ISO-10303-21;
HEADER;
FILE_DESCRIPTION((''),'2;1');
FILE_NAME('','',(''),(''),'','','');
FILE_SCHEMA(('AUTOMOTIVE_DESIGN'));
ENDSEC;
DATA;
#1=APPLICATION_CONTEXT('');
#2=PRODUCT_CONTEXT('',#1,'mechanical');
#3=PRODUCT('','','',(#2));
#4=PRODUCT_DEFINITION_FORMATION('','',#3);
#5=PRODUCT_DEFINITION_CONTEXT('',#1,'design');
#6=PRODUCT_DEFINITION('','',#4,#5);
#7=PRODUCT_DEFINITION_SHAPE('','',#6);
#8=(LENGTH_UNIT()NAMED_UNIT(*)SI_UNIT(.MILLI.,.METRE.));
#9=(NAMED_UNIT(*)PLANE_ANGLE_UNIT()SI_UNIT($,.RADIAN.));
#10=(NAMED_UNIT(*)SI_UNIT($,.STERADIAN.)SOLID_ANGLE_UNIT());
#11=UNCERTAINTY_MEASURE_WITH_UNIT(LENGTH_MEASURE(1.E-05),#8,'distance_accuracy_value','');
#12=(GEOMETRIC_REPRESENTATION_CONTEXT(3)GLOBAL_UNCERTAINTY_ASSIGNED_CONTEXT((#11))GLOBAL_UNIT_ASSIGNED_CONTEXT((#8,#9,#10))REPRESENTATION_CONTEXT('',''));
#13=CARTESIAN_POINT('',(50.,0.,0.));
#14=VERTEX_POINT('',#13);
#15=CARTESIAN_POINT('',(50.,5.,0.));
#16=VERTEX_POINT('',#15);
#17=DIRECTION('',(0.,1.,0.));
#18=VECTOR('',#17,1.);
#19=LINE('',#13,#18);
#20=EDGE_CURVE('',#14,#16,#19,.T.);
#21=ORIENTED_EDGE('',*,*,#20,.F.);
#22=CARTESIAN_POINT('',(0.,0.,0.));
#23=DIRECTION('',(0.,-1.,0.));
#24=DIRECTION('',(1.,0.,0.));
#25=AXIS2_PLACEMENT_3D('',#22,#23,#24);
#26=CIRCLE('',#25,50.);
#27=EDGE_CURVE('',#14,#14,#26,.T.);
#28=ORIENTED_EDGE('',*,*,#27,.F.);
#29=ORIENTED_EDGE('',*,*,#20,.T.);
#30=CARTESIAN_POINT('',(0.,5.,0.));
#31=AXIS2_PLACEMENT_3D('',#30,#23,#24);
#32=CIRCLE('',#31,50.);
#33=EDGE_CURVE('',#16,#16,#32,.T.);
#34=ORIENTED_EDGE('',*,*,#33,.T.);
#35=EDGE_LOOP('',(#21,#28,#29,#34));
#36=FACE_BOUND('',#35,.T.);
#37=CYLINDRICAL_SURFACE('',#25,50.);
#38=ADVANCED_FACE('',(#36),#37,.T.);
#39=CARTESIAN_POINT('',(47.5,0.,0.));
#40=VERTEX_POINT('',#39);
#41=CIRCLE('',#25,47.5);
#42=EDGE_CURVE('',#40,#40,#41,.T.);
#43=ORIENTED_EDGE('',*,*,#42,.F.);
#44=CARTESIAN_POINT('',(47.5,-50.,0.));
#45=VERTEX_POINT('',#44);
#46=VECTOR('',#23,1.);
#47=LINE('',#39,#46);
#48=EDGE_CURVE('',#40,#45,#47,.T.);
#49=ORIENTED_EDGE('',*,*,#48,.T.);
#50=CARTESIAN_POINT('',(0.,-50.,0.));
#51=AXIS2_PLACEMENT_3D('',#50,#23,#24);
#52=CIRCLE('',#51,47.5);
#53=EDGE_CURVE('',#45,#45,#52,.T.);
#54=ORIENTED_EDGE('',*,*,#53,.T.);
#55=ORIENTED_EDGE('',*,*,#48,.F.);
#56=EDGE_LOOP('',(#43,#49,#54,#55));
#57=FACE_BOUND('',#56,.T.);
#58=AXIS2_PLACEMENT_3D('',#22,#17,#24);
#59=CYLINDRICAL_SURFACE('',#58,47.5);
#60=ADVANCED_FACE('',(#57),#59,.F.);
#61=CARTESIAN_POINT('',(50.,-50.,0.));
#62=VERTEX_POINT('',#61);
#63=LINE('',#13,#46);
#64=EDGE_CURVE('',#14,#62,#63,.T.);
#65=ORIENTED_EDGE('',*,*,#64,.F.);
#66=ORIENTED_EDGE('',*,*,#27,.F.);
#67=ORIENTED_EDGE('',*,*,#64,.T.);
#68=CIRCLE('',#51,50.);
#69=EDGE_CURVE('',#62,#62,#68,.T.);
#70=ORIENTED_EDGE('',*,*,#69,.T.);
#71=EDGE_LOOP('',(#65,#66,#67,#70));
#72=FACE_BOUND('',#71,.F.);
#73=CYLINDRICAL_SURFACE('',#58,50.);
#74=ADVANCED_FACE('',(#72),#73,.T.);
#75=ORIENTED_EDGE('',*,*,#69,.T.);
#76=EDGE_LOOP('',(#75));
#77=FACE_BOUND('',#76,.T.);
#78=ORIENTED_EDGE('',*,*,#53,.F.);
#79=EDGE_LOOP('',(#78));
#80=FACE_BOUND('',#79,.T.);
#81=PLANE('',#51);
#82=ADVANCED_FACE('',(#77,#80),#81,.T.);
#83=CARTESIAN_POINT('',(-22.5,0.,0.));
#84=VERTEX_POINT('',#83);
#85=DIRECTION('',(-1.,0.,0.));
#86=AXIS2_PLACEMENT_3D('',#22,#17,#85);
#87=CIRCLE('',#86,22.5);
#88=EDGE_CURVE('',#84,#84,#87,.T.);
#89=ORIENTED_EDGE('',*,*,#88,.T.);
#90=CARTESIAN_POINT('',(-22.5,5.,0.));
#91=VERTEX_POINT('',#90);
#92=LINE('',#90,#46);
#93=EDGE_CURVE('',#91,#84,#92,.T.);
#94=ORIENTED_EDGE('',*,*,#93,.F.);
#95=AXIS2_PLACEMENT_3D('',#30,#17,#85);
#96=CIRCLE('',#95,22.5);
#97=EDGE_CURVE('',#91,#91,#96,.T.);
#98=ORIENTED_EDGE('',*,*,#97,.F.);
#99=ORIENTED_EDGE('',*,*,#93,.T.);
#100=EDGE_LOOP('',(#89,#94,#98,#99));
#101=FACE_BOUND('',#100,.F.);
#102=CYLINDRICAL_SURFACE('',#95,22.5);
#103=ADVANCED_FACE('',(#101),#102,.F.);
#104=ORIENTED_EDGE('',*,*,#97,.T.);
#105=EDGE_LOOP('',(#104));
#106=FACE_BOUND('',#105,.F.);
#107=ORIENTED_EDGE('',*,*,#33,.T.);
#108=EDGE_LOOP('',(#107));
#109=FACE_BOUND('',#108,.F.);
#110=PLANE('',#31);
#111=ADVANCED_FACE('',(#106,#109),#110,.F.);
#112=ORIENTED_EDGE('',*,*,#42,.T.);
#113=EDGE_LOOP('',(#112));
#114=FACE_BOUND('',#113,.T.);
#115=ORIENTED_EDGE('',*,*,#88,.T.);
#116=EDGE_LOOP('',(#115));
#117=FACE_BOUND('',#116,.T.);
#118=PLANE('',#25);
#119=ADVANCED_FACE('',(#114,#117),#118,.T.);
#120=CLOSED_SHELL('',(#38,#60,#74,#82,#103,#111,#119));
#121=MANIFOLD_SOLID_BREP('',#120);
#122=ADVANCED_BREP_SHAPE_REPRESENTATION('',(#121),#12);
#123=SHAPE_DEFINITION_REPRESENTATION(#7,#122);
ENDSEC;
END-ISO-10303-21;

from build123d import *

# Parameters (mm, degrees)
F0_R     = 50
F1_DEPTH = 5
F2_R     = 50
F2_R_2   = 47.5
F3_DEPTH = 50
F4_R     = 22.5
F6_DEPTH = 55.001


# Not quite as in the source:
# - the program builds the solid bodies; features that only make, move or delete a surface that nothing else refers to are left out


with BuildPart() as f1:
    # F0 (on Front) → F1 (new body)
    with BuildSketch(Plane.XZ):
        Circle(F0_R)
    extrude(amount=-F1_DEPTH)

    # F2 (on Front) → F3 (join)
    with BuildSketch(Plane.XZ):
        Circle(F2_R)
        Circle(F2_R_2, mode=Mode.SUBTRACT)
    extrude(amount=F3_DEPTH)

    # F4 (on face) → F6 (cut, through all)
    with BuildSketch(Plane(origin=(0, 5, 0), x_dir=(-1, 0, 0), z_dir=(0, 1, 0))):
        Circle(F4_R)
    extrude(amount=-F6_DEPTH, mode=Mode.SUBTRACT)


solid = f1.part
